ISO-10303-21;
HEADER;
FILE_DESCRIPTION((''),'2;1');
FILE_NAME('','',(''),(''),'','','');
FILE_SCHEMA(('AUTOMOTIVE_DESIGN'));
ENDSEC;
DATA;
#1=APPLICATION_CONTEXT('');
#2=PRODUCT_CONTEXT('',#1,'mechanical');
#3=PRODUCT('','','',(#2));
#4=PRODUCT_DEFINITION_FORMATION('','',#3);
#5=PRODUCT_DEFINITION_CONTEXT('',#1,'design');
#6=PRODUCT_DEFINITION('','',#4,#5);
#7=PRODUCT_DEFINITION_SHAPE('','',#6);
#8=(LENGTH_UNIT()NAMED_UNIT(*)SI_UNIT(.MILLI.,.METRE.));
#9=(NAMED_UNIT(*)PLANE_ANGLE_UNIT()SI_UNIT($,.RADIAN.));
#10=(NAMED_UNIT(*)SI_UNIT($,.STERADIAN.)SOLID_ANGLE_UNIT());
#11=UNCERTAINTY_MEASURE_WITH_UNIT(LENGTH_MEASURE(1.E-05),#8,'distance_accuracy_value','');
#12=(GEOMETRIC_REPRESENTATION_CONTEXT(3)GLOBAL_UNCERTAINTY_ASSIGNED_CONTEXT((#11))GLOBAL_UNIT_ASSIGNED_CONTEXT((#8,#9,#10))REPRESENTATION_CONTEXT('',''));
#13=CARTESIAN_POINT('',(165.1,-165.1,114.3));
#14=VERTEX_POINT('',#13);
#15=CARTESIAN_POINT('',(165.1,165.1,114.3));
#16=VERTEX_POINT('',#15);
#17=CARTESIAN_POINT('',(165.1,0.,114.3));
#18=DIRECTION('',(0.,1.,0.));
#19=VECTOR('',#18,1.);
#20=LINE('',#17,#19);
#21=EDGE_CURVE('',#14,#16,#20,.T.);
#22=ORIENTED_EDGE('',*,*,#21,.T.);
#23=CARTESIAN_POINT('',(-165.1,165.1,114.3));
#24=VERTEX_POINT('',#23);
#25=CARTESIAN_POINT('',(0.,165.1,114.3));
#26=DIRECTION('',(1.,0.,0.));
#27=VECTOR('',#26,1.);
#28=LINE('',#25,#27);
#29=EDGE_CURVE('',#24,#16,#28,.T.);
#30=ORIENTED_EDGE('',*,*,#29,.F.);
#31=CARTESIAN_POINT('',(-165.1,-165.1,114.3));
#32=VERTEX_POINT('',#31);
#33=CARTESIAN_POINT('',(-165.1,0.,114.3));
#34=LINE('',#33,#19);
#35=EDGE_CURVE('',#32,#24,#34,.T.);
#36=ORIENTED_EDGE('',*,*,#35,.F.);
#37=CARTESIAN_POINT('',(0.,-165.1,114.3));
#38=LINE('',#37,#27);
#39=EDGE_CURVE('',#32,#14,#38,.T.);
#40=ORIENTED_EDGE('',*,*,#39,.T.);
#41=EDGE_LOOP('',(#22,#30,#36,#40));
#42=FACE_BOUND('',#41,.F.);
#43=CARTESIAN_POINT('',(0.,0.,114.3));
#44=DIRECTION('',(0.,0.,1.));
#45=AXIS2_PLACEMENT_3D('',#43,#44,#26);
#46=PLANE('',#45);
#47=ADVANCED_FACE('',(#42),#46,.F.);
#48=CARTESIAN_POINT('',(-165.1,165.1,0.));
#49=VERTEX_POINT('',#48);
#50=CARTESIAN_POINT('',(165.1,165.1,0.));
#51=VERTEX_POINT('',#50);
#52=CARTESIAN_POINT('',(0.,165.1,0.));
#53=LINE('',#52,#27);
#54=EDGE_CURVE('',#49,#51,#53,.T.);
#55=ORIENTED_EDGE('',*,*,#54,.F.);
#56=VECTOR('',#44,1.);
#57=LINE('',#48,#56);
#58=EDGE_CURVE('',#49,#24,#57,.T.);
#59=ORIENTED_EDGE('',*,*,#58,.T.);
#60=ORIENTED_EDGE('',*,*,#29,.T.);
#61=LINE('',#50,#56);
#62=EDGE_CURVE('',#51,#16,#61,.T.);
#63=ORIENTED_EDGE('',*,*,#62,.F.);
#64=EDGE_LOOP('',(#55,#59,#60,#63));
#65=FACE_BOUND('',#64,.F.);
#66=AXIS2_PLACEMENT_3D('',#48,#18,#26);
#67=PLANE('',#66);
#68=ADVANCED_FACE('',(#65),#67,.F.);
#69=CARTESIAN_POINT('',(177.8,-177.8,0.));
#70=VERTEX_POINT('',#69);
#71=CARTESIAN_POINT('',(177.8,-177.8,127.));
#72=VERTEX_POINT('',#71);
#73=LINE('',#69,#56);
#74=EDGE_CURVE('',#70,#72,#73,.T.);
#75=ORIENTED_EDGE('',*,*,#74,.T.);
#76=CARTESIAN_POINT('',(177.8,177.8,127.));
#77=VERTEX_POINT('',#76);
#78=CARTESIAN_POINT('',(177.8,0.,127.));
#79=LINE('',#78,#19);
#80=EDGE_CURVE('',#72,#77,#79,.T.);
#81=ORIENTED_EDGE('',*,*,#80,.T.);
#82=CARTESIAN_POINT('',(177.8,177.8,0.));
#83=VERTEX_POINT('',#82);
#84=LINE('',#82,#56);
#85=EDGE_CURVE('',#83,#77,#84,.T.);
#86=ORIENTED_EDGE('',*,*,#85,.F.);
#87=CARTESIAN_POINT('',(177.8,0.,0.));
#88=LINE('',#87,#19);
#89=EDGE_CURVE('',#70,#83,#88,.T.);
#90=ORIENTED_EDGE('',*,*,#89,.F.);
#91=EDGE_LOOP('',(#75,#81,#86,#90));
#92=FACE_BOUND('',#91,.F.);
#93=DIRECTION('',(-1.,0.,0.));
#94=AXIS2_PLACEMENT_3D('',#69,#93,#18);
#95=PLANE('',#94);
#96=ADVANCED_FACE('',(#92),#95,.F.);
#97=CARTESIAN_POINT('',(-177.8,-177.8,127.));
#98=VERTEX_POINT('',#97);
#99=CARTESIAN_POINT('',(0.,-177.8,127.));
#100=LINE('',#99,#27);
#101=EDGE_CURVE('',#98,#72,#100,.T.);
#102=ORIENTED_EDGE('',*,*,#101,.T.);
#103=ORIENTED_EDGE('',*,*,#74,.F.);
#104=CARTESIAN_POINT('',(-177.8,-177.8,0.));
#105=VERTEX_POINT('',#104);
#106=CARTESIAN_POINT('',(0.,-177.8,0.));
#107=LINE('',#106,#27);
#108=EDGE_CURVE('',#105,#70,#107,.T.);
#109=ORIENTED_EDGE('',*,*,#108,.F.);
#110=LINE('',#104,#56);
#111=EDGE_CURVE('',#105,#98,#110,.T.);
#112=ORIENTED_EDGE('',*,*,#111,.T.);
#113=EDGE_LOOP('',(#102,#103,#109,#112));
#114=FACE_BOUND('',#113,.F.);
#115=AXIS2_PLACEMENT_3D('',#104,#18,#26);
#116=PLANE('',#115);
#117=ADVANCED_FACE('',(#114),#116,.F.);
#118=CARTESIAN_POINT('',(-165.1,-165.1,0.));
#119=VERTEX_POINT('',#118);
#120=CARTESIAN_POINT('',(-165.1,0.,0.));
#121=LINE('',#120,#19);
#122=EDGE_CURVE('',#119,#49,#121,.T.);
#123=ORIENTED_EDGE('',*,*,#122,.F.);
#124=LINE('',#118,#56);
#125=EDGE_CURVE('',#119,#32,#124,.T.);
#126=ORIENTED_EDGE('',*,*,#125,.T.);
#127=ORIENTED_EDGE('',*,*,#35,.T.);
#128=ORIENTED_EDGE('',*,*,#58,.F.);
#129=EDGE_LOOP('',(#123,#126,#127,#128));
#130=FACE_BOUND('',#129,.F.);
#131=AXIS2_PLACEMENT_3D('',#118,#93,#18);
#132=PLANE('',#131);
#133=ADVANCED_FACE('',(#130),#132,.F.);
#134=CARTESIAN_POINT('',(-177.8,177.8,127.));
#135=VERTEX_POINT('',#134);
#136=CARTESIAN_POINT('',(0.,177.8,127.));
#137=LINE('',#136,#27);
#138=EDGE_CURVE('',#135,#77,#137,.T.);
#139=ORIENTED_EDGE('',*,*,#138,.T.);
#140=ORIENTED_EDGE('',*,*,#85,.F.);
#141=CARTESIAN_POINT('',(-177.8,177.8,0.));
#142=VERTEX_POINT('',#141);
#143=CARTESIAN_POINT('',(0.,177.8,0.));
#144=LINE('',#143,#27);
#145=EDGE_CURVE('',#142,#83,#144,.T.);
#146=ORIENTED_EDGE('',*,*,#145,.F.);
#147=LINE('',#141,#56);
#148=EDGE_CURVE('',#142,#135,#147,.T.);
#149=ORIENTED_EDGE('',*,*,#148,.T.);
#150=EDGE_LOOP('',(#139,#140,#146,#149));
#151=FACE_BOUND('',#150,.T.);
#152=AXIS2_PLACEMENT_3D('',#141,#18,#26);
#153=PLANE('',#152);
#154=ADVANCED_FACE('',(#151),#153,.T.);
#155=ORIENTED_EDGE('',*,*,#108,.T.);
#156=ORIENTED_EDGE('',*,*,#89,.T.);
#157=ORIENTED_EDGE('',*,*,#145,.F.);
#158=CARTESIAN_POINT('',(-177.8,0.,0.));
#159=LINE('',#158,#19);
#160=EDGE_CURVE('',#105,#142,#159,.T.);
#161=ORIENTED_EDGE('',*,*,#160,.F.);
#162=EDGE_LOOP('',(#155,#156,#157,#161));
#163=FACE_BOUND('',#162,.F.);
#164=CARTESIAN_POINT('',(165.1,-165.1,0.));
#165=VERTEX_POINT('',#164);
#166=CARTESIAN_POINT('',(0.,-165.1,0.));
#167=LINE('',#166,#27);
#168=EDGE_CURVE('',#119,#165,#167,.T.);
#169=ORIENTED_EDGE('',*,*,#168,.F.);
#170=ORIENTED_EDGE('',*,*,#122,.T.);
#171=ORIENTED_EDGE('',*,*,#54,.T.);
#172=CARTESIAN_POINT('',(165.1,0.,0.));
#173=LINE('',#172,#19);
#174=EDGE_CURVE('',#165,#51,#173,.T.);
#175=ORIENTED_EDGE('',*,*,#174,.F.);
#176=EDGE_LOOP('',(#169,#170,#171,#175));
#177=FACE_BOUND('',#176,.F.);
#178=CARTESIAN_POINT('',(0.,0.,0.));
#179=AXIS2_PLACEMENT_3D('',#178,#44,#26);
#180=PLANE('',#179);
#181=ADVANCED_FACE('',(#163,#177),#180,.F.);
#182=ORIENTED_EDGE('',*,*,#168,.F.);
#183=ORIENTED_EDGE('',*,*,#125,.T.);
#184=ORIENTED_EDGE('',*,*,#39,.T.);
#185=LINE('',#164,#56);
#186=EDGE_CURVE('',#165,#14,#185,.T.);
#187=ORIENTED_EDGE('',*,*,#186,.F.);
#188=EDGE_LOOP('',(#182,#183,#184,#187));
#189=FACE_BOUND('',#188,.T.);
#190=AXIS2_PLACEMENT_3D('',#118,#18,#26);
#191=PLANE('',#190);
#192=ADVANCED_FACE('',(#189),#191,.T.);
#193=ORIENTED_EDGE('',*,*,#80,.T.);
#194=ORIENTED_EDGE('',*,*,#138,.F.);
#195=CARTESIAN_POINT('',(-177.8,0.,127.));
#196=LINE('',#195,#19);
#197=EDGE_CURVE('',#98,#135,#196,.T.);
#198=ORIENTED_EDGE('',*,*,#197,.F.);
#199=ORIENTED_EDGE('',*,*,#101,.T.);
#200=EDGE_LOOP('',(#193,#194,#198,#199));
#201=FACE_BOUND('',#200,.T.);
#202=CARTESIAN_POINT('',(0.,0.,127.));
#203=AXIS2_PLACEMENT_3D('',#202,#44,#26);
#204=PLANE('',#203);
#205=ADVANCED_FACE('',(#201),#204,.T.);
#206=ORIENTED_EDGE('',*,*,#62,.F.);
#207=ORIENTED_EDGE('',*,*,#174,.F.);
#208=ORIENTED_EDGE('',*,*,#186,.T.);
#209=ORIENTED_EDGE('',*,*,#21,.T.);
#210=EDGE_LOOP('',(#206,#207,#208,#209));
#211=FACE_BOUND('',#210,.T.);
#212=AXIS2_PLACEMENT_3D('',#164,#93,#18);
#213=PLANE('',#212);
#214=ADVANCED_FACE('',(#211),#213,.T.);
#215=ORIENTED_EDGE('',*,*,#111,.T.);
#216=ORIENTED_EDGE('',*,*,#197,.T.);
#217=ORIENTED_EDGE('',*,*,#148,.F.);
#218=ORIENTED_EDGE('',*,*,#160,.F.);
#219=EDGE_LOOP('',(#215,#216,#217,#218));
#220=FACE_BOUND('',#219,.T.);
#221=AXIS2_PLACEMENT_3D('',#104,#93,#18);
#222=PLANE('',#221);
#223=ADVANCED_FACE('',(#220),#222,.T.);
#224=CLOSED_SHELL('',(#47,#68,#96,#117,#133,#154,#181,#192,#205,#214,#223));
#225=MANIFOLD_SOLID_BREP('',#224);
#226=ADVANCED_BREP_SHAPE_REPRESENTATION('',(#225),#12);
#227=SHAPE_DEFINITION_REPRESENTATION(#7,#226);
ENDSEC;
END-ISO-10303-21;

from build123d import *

# Parameters (mm, degrees)
F0_W     = 355.6
F0_H     = 355.6
F1_DEPTH = 127
F2_W     = 330.2
F2_H     = 330.2
F3_DEPTH = 114.3


# Not quite as in the source:
# - a feature names something its author has since deleted; it is built from what else it names


with BuildPart() as f1:
    # F0 (on Top) → F1 (new body)
    with BuildSketch(Plane.XY):
        Rectangle(F0_W, F0_H)
    extrude(amount=F1_DEPTH)

    # F2 (on Top) → F3 (cut)
    with BuildSketch(Plane.XY):
        Rectangle(F2_W, F2_H)
    extrude(amount=F3_DEPTH, mode=Mode.SUBTRACT)


solid = f1.part
